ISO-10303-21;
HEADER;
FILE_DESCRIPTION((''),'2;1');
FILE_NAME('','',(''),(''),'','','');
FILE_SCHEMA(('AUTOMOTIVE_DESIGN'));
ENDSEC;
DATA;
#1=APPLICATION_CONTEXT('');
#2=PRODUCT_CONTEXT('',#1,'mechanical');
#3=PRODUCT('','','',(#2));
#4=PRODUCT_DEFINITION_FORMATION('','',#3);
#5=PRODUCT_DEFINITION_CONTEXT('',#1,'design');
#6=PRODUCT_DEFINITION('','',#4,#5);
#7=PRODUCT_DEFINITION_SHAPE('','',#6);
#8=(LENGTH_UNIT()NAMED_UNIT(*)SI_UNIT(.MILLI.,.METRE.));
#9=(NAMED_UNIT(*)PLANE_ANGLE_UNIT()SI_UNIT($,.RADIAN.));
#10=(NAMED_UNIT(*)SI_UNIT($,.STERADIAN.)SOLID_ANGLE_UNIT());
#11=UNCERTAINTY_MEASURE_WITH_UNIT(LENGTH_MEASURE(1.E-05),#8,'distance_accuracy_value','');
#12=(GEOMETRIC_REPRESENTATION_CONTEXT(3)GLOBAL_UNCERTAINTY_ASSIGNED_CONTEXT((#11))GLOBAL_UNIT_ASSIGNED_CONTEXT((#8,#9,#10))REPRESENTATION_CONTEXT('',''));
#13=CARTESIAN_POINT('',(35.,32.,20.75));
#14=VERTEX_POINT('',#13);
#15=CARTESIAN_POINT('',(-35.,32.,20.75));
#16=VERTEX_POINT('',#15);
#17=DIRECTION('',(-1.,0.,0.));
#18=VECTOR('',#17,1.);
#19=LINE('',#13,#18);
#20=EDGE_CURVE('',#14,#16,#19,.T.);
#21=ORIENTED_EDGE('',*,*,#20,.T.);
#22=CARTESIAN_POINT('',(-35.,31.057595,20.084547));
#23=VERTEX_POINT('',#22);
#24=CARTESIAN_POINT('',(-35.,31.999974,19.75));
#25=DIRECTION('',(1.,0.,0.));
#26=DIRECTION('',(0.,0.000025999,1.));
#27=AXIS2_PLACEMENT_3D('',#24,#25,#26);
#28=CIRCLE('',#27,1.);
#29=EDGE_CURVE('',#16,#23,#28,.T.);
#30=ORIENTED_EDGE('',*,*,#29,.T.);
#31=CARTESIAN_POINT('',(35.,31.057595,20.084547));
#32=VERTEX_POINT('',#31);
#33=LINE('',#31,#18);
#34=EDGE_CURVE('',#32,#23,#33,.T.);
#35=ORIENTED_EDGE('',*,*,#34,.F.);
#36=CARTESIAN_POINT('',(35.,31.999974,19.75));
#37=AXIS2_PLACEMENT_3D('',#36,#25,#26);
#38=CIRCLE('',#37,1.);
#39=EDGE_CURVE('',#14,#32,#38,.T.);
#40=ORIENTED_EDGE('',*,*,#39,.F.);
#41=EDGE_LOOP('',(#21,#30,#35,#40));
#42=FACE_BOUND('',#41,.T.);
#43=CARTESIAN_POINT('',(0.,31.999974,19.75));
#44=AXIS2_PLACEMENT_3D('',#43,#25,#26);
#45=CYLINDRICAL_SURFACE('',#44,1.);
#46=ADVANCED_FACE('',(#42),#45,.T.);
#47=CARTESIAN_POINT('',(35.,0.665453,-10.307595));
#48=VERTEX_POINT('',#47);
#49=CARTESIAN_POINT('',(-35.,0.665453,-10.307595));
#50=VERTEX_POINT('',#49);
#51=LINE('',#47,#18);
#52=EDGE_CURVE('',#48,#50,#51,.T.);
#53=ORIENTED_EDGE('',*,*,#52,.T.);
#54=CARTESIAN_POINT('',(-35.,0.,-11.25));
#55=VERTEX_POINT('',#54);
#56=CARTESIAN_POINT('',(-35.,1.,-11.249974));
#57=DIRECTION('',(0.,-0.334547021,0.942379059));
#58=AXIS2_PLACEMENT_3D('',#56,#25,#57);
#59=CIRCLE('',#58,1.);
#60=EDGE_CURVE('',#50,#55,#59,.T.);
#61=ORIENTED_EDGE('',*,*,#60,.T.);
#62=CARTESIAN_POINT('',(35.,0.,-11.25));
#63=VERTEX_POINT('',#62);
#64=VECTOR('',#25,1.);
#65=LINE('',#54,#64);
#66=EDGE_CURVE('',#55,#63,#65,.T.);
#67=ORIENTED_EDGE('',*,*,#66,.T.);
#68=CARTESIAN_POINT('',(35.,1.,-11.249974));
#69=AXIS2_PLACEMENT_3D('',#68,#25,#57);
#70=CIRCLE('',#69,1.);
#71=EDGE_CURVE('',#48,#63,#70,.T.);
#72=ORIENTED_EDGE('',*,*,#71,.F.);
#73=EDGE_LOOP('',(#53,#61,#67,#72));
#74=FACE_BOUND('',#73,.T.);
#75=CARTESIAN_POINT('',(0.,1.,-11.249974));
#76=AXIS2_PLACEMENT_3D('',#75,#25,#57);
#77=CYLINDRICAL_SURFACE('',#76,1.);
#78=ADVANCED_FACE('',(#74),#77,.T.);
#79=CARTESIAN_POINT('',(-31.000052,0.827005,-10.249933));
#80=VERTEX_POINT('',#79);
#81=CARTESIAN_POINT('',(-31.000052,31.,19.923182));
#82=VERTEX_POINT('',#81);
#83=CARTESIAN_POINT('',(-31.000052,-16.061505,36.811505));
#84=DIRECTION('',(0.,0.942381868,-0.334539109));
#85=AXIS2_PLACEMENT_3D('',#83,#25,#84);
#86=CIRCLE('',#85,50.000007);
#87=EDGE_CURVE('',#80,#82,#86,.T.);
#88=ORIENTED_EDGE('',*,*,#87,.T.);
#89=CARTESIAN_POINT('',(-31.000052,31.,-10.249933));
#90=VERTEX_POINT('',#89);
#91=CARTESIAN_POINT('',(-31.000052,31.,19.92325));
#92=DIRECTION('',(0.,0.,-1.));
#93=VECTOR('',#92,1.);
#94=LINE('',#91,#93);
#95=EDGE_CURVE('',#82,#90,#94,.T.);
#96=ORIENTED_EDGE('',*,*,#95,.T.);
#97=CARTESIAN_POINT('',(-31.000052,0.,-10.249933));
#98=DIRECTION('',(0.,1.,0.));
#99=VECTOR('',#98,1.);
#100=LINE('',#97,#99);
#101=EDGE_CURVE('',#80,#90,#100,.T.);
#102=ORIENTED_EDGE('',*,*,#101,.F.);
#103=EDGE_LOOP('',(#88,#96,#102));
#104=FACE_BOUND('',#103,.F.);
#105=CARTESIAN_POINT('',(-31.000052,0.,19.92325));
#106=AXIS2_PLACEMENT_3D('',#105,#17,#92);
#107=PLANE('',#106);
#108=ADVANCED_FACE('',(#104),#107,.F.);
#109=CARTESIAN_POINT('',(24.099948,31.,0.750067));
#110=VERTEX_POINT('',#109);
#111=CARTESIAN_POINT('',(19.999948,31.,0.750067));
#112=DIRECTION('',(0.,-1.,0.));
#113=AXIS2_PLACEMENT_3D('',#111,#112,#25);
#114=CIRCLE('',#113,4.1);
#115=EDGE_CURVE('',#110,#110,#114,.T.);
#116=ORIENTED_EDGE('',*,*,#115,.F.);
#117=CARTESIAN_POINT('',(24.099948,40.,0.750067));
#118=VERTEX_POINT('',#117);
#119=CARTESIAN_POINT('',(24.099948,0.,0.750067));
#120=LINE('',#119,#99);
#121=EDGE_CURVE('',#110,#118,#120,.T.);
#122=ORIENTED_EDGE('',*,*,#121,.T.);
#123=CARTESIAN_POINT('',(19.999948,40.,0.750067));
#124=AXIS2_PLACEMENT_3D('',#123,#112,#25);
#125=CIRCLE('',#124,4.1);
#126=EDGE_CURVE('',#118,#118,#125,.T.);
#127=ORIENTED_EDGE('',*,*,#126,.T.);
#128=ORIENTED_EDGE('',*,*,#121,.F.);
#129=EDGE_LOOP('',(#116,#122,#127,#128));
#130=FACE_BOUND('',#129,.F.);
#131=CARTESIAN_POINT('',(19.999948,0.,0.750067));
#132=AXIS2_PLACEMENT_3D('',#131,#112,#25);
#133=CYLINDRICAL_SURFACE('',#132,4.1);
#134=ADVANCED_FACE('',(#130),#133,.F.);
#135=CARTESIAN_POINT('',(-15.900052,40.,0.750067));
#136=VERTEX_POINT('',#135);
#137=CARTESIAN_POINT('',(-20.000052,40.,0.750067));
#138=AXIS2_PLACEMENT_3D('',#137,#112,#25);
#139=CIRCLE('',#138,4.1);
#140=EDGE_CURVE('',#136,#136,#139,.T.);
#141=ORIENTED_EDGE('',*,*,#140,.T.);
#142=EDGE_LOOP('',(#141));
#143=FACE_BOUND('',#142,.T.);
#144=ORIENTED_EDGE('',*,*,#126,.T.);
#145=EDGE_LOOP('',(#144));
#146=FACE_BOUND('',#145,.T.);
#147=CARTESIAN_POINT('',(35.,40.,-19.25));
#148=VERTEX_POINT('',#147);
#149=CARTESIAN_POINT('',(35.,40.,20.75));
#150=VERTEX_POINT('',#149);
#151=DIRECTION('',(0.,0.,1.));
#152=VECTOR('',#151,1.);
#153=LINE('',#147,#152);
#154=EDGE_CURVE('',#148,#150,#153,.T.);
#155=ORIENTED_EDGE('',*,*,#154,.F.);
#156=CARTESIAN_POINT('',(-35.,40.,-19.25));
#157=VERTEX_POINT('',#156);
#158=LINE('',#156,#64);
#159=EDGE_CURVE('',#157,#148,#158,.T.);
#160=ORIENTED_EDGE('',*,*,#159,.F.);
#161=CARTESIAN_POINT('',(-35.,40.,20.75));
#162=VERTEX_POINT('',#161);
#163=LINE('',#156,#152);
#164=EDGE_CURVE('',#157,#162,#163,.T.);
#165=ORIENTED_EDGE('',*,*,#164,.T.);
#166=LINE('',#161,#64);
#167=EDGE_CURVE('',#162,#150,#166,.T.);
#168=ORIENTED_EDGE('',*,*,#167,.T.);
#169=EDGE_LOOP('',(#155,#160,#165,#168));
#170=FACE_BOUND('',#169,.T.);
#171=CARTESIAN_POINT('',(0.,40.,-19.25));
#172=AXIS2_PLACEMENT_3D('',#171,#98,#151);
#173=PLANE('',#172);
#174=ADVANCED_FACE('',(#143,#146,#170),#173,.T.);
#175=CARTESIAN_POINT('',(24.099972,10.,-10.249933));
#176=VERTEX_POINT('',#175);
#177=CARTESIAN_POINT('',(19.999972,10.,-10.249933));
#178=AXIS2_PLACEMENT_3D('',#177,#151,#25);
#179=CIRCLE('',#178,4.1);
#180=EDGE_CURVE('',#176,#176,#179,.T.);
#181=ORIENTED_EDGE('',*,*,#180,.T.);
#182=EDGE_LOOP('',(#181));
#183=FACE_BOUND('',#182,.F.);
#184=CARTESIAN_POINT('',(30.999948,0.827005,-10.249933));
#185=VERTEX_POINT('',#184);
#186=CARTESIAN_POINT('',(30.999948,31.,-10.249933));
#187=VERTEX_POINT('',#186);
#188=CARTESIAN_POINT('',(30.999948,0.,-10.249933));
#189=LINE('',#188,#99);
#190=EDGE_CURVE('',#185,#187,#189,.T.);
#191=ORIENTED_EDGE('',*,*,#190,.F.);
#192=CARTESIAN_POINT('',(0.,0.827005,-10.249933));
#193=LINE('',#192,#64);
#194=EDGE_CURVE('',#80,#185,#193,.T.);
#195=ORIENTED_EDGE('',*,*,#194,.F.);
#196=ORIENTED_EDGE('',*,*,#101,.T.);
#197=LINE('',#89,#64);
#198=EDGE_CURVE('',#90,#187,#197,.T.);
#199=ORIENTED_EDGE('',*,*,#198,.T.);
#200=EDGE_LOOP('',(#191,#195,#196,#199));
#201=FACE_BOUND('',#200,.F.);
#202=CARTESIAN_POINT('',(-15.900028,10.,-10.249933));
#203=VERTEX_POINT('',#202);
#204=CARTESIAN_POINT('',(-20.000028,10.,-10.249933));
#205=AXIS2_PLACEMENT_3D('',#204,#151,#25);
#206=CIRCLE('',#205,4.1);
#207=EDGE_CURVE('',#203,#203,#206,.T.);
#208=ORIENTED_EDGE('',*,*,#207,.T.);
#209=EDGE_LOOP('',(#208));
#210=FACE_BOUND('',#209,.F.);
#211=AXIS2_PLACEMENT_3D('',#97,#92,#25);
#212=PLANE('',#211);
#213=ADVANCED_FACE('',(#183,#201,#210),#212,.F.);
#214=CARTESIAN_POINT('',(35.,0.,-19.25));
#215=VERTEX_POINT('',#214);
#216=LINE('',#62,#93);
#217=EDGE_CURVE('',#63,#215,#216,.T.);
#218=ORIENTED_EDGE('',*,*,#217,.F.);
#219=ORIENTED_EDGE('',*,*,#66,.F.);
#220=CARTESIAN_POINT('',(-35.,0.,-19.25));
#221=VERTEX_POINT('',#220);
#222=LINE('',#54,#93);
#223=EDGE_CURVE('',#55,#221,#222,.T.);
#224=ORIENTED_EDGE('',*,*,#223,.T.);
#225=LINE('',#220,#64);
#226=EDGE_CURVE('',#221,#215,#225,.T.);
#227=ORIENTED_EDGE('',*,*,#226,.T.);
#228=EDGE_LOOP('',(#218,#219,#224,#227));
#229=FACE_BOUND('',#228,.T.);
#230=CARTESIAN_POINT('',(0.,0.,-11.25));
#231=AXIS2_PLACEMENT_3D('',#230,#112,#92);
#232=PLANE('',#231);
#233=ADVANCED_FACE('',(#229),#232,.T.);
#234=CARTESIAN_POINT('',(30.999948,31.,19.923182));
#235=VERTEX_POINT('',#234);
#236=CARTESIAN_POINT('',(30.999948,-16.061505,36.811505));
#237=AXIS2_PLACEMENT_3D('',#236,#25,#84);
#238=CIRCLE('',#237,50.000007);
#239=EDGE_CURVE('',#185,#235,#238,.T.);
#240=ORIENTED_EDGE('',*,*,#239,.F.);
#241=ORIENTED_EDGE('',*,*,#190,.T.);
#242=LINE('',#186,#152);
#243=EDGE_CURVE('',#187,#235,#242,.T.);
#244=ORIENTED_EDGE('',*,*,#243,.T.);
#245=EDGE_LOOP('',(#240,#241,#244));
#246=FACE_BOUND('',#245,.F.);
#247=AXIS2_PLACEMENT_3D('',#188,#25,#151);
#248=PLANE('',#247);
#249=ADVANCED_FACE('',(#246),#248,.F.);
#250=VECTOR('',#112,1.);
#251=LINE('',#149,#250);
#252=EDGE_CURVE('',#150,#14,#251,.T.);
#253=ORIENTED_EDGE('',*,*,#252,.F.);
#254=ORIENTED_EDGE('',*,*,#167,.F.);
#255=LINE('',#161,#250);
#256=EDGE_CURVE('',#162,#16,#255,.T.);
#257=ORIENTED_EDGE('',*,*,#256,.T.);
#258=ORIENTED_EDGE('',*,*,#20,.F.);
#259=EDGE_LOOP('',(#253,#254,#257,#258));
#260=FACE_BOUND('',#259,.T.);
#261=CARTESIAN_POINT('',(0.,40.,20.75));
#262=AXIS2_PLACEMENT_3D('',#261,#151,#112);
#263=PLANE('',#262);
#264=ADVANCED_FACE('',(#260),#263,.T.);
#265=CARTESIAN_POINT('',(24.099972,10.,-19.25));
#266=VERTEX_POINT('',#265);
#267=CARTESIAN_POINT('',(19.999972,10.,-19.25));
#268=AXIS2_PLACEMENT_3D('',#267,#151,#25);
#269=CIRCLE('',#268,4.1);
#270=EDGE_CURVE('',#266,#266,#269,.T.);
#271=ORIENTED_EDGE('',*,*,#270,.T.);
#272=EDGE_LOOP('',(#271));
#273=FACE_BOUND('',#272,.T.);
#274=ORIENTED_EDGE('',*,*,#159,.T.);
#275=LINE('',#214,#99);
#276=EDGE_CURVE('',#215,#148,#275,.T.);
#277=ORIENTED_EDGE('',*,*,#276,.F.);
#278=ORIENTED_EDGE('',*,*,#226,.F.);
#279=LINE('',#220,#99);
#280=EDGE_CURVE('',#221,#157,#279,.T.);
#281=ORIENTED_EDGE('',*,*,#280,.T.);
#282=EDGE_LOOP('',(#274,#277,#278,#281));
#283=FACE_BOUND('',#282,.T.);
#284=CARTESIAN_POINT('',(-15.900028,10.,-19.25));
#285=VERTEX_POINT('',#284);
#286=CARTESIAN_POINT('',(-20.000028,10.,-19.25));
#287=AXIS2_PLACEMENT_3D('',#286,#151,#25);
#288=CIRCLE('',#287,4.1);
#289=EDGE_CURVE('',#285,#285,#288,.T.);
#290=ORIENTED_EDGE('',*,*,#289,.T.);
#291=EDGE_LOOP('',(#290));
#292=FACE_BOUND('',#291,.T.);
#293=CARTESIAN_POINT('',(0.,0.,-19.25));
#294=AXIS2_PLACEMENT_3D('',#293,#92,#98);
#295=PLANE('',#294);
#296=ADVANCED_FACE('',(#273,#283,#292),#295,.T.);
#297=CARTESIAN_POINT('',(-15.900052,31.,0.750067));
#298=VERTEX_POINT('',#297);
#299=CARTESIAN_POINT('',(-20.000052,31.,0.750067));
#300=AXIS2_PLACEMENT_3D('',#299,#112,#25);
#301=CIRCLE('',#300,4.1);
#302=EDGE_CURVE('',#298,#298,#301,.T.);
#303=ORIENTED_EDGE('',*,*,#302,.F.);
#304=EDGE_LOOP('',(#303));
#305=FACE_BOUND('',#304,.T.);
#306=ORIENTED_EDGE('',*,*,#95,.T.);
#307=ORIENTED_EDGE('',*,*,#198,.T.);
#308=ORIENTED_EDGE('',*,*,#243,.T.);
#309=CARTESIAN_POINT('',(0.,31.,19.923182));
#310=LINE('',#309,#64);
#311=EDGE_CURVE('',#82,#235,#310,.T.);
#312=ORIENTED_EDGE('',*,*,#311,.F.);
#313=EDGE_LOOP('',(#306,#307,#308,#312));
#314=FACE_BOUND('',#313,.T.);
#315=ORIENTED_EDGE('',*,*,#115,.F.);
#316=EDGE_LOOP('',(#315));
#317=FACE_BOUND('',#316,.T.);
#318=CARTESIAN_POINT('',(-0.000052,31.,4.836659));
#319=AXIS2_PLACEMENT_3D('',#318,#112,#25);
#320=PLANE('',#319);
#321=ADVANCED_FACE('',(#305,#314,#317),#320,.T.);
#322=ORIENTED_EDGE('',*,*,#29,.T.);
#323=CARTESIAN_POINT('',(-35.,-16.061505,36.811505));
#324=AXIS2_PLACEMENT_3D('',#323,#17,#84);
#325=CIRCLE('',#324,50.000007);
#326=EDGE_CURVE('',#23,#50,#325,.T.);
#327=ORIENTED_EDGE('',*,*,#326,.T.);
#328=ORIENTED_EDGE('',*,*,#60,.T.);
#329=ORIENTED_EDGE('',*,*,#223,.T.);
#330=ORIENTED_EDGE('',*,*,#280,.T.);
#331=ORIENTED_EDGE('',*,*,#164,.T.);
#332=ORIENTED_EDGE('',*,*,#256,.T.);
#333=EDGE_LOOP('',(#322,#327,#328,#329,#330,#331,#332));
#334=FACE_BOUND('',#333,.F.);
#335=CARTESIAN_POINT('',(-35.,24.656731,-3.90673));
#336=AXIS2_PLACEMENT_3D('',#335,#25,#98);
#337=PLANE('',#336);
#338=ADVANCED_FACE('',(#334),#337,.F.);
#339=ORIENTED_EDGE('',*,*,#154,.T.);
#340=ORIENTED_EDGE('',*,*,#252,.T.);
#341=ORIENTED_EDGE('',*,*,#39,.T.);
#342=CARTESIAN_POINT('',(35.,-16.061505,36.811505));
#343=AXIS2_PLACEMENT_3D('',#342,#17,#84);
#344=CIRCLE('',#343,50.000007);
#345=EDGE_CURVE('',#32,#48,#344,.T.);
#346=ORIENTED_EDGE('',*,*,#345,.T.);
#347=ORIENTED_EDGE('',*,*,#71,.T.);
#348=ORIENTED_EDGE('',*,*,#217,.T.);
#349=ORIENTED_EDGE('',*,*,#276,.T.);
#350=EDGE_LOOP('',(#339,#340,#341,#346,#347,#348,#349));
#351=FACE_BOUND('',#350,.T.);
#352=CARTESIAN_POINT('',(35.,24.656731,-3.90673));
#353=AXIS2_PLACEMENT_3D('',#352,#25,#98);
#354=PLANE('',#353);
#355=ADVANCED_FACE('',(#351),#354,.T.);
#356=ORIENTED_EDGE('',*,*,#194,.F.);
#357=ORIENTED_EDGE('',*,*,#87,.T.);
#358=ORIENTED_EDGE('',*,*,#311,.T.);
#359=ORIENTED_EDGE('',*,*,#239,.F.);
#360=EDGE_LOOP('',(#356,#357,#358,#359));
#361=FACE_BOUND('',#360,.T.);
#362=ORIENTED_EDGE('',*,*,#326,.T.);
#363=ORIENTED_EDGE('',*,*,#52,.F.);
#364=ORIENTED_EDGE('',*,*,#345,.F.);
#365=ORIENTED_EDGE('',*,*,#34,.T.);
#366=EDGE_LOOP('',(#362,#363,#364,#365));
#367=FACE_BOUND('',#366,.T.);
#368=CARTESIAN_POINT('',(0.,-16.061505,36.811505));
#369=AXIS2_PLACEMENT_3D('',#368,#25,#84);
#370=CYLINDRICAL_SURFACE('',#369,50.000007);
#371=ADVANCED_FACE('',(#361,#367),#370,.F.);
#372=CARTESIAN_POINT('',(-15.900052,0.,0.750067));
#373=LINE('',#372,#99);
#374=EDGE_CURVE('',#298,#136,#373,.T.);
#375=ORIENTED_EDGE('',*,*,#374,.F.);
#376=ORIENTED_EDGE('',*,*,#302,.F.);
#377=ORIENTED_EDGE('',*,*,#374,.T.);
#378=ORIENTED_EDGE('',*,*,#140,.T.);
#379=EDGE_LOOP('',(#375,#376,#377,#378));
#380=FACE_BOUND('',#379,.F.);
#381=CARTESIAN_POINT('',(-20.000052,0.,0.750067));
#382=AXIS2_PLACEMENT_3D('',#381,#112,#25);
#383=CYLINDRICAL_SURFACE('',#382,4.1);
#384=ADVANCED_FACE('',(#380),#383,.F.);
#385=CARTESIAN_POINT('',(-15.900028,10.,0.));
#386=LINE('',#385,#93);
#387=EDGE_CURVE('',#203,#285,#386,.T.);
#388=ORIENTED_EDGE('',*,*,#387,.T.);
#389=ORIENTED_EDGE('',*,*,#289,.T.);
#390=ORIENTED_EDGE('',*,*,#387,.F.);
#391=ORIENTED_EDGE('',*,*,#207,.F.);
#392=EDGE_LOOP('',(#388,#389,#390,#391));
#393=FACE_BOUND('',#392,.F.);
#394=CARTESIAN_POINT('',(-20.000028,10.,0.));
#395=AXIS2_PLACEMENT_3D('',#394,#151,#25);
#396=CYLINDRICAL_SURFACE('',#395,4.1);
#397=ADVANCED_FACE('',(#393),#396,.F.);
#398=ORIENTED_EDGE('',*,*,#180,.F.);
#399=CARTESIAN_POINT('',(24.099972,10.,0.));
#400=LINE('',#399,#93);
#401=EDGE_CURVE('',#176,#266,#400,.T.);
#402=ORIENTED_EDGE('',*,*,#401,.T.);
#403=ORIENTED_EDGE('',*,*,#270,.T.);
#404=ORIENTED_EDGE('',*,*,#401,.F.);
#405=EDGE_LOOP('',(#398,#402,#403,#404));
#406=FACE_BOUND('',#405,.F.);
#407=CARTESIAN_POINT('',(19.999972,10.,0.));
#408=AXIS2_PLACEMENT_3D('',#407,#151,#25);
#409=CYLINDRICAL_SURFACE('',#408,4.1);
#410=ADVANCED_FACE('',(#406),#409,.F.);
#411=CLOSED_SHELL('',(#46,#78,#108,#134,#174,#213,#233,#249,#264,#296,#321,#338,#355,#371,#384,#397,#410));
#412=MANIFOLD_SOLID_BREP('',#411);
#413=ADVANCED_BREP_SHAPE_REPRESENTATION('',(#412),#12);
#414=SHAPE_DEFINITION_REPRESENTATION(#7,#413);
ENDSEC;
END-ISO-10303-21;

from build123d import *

# Parameters (mm, degrees)
F1_DEPTH = 35
F2_R     = 4.1
F3_DEPTH = 31
F4_DEPTH = 40.001
F5_R     = 4.1
F6_DEPTH = 19.2509998957


# Not quite as in the source:
# - ends of sketch curves that miss each other by under 0.0002 mm in the source are joined


with BuildPart() as f1:
    # F0 (on Right) → F1 (new body, symmetric)
    with BuildSketch(Plane.YZ):
        with BuildLine():
            ThreePointArc((0.6654529791, -10.3075948367), (0.1831243905, -10.6731600274), (3e-10, -11.2499998957))
            Line((3e-10, -11.2499998957), (0, -19.2499998957))
            Line((0, -19.2499998957), (40, -19.2499998957))
            Line((40, -19.2499998957), (40, 20.7500001043))
            Line((40, 20.7500001043), (32, 20.7500001043))
            ThreePointArc((32, 20.7500001043), (31.4231601317, 20.5668757138), (31.057594941, 20.0845471252))
            ThreePointArc((31.057594941, 20.0845471252), (19.2938390593, 1.456161045), (0.6654529791, -10.3075948367))
        make_face()
    extrude(amount=F1_DEPTH, both=True)

    # F2 (on Front) → F3 (cut)
    with BuildSketch(Plane.XZ):
        Polygon((-15.9000523031, -10.2499328405), (15.8999476969, -10.2499328405), (19.9999476969, -10.2499328405), (24.0999476969, -10.2499328405), (30.9999476969, -10.2499328405), (30.9999476969, 19.9232501595), (-31.0000523031, 19.9232501595), (-31.0000523031, -10.2499328405), (-24.1000523031, -10.2499328405), (-20.0000523031, -10.2499328405), align=None)
        with Locations((-20.0000523031, 0.7500671595)):
            Circle(F2_R, mode=Mode.SUBTRACT)
        with Locations((19.9999476969, 0.7500671595)):
            Circle(F2_R, mode=Mode.SUBTRACT)
        with Locations((-20.0000523031, 0.7500671595)):
            Circle(F2_R)
        with Locations((19.9999476969, 0.7500671595)):
            Circle(F2_R)
    extrude(amount=-F3_DEPTH, mode=Mode.SUBTRACT)

    # F2 (on Front) → F4 (cut, through all)
    with BuildSketch(Plane.XZ):
        with Locations((19.9999476969, 0.7500671595)):
            Circle(F2_R)
        with Locations((-20.0000523031, 0.7500671595)):
            Circle(F2_R)
    extrude(amount=-F4_DEPTH, mode=Mode.SUBTRACT)

    # F5 (on Top) → F6 (cut, through all)
    with BuildSketch(Plane.XY):
        with Locations((-20.000027626, 10)):
            Circle(F5_R)
        with Locations((19.999972374, 10)):
            Circle(F5_R)
    extrude(amount=-F6_DEPTH, mode=Mode.SUBTRACT)


solid = f1.part
